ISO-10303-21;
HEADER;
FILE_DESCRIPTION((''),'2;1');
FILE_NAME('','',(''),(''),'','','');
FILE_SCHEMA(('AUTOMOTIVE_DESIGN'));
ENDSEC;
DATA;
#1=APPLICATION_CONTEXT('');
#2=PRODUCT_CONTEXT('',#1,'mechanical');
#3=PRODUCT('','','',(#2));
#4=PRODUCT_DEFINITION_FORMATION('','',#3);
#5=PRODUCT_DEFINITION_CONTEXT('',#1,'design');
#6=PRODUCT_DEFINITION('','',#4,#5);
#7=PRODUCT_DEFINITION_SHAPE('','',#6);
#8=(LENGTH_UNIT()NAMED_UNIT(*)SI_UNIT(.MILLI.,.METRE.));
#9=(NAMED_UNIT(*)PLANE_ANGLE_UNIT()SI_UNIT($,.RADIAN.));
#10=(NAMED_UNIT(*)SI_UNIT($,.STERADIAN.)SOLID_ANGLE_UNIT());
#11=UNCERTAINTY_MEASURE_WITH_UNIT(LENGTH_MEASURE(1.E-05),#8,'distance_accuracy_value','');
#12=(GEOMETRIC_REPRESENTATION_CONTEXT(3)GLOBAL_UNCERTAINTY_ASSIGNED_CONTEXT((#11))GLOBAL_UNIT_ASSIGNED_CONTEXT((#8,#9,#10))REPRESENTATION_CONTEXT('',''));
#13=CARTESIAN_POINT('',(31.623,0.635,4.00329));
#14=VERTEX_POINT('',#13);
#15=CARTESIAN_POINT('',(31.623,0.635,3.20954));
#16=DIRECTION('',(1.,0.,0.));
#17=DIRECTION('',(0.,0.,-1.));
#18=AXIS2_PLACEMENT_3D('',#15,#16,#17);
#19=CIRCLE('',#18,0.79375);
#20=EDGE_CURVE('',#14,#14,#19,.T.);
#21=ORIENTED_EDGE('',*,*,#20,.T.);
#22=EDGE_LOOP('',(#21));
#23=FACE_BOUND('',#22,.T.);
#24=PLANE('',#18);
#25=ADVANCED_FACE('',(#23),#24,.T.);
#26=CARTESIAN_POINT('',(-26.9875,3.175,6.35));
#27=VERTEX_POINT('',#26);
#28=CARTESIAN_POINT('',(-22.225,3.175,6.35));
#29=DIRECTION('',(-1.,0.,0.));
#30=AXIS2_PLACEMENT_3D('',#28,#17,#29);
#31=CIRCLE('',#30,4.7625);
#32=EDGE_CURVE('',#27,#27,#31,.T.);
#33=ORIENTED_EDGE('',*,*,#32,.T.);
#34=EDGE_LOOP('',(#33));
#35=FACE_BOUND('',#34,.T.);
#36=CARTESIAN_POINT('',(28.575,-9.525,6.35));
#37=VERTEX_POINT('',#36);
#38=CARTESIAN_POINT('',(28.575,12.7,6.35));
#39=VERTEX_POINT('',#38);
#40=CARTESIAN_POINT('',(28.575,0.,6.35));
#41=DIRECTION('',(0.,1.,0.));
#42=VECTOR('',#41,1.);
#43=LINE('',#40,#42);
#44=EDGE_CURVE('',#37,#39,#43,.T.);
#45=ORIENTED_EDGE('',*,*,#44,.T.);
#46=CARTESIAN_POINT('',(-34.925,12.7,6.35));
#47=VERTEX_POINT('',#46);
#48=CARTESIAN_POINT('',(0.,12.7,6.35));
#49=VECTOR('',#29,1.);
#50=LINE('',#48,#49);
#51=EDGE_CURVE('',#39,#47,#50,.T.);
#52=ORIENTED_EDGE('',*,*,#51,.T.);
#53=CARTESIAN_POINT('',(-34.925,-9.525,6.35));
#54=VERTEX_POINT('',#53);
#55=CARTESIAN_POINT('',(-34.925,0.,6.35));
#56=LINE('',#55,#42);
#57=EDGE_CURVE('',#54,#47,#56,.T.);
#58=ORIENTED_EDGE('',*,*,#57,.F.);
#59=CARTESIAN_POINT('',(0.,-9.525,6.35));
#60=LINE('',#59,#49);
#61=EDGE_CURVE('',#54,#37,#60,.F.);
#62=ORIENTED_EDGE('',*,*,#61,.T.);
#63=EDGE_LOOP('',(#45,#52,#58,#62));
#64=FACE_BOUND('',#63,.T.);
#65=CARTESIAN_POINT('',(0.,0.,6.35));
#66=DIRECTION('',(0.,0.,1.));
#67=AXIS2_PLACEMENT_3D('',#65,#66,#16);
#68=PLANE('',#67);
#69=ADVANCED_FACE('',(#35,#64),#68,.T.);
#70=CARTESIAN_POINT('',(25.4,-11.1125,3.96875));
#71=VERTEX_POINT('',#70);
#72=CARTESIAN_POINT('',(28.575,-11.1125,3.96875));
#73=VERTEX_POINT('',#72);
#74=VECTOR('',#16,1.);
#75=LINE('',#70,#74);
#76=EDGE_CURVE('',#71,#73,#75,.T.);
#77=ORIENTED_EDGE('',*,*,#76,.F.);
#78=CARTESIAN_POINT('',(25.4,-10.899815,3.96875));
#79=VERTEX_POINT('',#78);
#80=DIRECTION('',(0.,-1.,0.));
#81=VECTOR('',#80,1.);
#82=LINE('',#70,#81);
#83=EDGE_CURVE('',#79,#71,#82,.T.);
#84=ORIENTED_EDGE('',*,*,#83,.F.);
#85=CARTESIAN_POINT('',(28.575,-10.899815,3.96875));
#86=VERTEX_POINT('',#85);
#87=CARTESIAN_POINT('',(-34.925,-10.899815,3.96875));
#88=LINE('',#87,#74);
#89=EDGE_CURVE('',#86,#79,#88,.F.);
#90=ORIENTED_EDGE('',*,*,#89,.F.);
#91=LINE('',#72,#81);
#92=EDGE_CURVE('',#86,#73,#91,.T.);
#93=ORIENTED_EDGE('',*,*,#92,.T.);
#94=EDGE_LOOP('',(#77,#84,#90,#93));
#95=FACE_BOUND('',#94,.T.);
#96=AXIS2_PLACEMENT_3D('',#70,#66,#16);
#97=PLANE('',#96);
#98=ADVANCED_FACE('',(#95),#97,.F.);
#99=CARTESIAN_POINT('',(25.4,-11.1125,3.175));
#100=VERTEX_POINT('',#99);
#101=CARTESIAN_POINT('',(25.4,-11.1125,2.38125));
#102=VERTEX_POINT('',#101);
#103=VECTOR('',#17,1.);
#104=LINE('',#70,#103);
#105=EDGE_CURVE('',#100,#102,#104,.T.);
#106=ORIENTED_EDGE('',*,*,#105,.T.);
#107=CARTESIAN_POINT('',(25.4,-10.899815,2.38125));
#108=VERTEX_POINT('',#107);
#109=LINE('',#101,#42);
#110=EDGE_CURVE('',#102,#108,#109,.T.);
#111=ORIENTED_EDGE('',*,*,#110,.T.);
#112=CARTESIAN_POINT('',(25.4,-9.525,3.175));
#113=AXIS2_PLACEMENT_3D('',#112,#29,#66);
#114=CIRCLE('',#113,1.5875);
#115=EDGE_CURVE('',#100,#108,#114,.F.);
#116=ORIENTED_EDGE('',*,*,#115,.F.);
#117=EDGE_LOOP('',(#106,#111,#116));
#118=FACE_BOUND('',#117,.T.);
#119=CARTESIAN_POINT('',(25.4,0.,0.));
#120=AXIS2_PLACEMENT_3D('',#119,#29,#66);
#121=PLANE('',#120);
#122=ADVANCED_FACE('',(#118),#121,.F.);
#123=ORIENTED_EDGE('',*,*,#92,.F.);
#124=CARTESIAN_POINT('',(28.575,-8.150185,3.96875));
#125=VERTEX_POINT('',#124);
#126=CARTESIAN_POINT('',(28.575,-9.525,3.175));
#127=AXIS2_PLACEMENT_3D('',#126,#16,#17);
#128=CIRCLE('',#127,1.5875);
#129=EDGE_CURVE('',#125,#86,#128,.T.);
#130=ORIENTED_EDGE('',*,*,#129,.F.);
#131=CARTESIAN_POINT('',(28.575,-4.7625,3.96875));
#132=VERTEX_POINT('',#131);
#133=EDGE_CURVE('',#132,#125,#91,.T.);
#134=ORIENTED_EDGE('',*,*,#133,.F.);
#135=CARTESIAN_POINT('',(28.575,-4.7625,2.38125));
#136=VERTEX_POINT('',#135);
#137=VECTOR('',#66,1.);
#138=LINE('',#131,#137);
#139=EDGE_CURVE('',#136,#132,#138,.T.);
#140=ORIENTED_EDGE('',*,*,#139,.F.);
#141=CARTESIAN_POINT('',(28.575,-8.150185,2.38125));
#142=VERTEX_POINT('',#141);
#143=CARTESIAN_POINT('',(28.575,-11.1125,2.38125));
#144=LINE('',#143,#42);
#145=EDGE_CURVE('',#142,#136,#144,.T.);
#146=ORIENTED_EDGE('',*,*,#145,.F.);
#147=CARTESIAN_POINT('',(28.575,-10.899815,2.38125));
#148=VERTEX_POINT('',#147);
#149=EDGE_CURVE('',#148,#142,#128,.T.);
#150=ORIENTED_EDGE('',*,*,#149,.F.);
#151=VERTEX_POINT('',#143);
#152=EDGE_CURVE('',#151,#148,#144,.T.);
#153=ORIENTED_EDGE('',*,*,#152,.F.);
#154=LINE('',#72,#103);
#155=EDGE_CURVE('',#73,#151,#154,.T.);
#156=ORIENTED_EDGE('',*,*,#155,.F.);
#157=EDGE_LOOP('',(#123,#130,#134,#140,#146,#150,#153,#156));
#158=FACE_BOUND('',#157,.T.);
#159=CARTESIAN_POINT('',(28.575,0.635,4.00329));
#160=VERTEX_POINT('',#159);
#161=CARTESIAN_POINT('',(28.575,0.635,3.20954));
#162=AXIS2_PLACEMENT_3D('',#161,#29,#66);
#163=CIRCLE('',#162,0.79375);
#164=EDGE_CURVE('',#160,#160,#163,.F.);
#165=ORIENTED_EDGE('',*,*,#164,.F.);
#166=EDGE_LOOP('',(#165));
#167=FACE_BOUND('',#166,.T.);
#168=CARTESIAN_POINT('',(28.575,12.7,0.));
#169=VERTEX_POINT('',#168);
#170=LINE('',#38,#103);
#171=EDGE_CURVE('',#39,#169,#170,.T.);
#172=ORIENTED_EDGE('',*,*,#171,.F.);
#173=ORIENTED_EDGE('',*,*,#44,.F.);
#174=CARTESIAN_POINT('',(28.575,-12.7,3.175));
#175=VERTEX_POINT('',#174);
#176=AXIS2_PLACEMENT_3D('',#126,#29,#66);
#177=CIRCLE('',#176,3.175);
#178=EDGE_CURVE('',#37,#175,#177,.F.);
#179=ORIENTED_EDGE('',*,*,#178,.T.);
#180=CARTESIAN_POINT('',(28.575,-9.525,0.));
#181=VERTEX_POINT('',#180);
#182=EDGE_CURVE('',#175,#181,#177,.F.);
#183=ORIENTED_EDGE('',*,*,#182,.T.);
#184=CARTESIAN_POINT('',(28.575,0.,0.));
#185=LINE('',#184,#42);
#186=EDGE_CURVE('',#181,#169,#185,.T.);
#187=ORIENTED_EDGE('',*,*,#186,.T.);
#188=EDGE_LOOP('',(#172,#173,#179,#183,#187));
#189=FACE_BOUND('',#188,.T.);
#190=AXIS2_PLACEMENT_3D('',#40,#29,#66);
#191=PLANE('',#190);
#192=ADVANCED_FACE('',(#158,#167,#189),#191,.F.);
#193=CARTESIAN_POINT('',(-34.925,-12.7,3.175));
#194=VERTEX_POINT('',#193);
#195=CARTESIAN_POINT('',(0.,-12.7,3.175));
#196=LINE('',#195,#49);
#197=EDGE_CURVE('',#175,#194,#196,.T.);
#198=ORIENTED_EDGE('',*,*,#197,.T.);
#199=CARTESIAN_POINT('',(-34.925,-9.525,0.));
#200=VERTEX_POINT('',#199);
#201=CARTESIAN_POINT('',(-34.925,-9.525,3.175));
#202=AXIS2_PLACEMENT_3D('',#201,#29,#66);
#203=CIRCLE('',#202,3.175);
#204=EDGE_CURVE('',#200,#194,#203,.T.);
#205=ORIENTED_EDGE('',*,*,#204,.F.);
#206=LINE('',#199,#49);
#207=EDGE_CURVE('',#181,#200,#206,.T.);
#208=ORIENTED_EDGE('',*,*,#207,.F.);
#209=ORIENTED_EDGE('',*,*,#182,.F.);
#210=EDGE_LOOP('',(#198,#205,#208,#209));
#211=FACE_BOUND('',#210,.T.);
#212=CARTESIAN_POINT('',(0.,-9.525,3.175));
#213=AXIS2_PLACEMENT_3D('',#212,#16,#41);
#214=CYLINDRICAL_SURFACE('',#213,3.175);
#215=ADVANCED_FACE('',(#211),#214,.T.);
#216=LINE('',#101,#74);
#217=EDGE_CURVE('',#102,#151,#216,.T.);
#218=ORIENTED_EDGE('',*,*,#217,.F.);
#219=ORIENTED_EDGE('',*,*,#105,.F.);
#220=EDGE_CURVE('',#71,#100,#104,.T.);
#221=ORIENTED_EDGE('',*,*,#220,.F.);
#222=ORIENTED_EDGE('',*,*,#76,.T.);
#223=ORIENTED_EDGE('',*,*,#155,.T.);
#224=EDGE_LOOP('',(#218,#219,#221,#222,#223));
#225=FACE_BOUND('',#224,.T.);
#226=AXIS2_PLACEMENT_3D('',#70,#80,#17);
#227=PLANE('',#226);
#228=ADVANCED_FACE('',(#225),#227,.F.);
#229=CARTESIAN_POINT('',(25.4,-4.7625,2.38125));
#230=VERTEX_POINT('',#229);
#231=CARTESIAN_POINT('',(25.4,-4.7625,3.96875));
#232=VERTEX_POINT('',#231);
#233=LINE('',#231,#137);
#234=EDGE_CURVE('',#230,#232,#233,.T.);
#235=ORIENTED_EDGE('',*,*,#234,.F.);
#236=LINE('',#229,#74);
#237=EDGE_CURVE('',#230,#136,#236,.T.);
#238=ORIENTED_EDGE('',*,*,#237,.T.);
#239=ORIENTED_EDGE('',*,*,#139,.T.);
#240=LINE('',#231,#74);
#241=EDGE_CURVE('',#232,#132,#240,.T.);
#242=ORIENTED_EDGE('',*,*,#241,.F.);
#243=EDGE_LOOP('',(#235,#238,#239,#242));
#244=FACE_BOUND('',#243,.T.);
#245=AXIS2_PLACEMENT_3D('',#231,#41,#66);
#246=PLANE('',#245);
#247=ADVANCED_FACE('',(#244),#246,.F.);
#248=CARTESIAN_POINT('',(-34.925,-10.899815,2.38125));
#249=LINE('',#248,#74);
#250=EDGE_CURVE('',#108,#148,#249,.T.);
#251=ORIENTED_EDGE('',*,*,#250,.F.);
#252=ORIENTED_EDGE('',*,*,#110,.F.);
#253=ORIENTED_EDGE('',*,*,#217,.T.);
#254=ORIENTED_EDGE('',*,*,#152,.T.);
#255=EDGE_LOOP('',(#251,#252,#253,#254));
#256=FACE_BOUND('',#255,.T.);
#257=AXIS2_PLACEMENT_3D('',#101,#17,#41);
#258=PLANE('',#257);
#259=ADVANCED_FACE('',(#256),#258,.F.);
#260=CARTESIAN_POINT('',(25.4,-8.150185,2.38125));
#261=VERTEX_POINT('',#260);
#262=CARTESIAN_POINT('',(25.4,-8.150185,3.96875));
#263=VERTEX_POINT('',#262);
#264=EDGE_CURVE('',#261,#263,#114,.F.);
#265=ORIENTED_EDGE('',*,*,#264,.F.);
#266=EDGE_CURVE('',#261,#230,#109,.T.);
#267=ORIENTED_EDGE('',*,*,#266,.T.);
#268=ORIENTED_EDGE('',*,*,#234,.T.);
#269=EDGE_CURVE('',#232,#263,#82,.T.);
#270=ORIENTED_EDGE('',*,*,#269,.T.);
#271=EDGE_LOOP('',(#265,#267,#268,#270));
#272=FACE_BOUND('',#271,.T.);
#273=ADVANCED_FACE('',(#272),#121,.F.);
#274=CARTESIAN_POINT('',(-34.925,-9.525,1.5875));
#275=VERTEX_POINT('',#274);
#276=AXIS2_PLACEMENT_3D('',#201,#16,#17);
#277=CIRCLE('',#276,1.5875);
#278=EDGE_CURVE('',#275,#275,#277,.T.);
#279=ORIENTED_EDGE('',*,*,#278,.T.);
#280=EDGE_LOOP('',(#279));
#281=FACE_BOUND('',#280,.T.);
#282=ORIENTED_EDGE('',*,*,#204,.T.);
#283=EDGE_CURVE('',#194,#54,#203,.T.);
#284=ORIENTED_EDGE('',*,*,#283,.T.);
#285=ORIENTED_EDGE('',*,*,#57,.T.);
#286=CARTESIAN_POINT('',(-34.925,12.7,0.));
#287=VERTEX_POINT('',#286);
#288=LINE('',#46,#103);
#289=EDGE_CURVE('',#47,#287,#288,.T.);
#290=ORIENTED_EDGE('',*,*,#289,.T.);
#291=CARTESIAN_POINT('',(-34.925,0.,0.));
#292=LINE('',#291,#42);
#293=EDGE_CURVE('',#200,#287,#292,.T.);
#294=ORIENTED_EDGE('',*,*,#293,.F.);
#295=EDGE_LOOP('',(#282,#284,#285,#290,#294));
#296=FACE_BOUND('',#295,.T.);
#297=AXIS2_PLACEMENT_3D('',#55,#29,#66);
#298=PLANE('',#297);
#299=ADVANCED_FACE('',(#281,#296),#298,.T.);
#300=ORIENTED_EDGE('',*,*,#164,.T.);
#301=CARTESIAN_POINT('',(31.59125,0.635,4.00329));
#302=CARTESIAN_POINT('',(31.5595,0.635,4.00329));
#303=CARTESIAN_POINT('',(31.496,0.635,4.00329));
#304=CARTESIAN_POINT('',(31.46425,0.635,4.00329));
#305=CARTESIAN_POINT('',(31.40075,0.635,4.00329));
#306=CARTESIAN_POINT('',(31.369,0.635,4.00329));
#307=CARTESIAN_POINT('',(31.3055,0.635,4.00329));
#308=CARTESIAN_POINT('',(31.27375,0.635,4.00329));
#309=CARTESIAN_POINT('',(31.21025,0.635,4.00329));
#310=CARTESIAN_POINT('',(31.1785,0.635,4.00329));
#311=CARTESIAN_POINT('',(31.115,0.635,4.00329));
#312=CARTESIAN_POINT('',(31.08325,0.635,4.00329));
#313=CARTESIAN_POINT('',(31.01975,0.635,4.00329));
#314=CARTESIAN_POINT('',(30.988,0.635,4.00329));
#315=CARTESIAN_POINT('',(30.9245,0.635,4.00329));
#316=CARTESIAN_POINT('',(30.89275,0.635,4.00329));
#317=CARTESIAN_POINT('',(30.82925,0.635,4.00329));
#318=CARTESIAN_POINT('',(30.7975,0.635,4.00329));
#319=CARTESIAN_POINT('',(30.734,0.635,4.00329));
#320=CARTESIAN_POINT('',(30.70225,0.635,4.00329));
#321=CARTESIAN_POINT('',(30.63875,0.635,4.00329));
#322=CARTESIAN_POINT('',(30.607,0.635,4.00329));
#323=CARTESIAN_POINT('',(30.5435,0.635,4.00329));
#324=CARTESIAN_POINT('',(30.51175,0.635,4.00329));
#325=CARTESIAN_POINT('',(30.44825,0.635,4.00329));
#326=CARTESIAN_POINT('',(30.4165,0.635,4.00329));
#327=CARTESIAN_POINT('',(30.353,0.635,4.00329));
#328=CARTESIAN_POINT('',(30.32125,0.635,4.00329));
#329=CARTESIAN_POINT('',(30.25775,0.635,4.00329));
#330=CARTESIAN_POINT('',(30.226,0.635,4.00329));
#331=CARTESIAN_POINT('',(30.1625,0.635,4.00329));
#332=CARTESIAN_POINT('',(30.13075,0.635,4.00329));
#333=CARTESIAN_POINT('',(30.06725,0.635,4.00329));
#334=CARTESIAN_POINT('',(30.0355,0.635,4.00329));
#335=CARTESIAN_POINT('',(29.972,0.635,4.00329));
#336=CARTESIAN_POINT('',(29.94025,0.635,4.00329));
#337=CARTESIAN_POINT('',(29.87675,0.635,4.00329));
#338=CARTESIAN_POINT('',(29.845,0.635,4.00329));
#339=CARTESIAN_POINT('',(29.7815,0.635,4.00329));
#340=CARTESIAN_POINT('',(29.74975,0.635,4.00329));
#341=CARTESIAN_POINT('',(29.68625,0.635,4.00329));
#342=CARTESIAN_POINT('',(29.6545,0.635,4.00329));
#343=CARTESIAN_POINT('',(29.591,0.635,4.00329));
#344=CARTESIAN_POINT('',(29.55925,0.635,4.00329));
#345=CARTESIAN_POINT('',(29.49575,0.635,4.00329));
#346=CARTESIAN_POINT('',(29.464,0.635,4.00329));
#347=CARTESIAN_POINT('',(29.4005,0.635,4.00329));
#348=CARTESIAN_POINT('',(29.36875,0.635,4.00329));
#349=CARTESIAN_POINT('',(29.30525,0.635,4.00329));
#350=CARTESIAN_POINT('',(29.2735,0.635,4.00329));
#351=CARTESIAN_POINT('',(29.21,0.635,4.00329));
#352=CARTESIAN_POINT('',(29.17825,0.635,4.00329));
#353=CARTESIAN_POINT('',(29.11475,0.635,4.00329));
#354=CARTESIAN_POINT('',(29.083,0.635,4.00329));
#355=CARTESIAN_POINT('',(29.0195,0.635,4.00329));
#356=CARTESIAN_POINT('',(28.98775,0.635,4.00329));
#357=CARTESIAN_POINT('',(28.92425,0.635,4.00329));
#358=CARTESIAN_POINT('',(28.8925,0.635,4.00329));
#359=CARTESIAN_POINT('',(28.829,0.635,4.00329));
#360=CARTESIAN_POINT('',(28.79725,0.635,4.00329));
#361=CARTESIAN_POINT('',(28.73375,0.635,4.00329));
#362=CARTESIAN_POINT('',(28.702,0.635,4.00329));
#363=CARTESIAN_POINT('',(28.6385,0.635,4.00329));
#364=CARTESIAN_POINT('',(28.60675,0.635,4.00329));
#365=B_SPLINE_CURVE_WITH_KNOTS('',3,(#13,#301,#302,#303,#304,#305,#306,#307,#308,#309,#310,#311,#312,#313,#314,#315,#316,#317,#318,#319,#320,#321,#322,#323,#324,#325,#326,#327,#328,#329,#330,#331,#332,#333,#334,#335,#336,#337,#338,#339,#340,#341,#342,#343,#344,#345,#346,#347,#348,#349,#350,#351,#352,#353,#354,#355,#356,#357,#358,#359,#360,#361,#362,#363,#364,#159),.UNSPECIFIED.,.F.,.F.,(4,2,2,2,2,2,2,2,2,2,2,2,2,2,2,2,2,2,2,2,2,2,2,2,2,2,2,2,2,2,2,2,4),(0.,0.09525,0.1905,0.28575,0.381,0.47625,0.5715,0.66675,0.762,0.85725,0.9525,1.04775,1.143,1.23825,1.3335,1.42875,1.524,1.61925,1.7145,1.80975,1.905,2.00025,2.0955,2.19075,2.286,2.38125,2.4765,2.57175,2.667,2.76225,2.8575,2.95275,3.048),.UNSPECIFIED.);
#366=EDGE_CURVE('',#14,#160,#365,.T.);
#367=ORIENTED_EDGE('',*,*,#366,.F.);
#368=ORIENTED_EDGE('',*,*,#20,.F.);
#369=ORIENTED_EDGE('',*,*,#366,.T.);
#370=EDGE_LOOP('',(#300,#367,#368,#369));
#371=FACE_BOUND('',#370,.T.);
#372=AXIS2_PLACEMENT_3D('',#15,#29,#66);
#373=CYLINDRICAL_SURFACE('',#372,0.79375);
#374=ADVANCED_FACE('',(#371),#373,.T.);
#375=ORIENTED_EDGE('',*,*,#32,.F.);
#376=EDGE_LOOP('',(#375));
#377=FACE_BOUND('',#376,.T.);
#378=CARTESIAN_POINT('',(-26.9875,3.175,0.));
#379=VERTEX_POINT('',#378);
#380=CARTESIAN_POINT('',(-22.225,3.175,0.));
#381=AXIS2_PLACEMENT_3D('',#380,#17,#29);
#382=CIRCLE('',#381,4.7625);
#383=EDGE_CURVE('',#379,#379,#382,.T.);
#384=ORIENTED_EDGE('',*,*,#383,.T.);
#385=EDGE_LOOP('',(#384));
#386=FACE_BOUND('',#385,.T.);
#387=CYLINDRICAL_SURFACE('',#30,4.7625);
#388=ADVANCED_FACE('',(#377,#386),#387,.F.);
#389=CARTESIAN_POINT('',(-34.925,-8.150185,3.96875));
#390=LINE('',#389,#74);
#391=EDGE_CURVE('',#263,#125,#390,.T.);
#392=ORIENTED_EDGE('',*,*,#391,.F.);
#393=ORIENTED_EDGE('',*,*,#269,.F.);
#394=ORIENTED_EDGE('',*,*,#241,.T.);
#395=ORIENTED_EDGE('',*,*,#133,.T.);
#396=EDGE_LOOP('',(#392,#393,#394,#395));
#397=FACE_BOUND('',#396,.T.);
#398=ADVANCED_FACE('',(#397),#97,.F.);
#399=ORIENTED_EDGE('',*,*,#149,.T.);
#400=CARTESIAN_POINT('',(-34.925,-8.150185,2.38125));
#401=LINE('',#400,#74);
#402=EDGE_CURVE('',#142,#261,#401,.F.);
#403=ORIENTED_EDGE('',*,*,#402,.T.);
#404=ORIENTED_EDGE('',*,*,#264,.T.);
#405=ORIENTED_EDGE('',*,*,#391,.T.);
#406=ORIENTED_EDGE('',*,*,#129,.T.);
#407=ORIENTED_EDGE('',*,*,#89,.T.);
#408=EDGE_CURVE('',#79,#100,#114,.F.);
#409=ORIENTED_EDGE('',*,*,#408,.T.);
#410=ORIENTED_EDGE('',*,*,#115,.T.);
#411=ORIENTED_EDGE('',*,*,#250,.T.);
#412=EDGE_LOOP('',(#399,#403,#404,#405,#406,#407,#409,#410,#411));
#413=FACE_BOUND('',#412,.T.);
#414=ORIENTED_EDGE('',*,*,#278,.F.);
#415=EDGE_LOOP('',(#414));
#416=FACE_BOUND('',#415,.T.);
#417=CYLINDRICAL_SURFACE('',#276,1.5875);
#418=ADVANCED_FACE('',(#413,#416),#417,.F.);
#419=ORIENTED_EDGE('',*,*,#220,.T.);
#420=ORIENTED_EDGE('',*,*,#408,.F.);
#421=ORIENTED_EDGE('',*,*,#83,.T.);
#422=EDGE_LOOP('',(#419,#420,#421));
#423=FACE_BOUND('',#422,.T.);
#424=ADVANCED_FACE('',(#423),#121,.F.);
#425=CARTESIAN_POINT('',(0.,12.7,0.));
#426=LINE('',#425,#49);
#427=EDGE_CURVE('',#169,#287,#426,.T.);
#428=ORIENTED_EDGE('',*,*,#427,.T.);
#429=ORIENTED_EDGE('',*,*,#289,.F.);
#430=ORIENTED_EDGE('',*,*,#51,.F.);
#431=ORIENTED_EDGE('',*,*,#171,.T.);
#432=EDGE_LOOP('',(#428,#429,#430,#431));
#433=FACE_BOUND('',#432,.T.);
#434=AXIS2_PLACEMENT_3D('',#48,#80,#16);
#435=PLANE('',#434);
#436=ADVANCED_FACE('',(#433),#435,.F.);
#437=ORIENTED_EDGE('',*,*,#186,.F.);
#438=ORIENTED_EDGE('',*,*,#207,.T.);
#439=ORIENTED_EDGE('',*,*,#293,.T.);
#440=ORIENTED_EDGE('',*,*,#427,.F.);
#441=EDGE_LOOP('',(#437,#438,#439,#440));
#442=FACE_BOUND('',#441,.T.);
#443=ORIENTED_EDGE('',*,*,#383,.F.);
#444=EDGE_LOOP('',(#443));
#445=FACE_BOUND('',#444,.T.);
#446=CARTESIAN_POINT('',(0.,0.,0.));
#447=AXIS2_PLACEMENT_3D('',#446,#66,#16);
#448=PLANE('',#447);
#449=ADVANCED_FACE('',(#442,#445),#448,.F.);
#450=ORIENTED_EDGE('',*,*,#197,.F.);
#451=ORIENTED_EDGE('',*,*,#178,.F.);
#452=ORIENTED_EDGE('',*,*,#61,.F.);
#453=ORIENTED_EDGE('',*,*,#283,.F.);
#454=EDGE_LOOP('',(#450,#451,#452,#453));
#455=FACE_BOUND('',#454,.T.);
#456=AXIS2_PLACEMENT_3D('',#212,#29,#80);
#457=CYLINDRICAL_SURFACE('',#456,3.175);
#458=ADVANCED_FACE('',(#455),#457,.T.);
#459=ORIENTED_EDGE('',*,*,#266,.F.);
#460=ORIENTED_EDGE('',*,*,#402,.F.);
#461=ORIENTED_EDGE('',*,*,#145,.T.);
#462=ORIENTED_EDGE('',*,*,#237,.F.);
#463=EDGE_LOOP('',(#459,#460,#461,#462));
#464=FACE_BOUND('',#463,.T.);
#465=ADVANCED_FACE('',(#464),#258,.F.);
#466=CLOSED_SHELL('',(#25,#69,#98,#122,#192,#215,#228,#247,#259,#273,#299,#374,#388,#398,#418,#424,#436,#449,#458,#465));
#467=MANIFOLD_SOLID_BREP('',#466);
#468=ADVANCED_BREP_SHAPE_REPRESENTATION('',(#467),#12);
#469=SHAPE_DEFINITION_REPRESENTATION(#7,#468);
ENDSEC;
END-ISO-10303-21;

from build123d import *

# Parameters (mm, degrees)
SKETCH1_W           = 63.5
SKETCH1_H           = 25.4
BOSS_EXTRUDE1_DEPTH = 6.35
SKETCH3_R           = 1.5875
CUT_EXTRUDE2_DEPTH  = 66.068137364
FILLET1_R           = 3.175
SKETCH4_R           = 4.7625
CUT_EXTRUDE3_DEPTH  = 38.701036126
SKETCH5_W           = 1.5875
SKETCH5_H           = 6.35
CUT_EXTRUDE4_DEPTH  = 3.175
SKETCH6_R           = 0.79375
BOSS_EXTRUDE2_DEPTH = 3.048


with BuildPart() as part:
    # Sketch1 → Boss-Extrude1 (new body)
    with BuildSketch(Plane.XY):
        with Locations((-3.175, 0)):
            Rectangle(SKETCH1_W, SKETCH1_H)
    extrude(amount=BOSS_EXTRUDE1_DEPTH)

    # Sketch3 → Cut-Extrude2 (cut, through all)
    with BuildSketch(Plane(origin=(28.575, 0, 6.35), x_dir=(0, 0, -1), z_dir=(1, 0, 0))):
        with Locations((3.175, -9.525)):
            Circle(SKETCH3_R)
    extrude(amount=-CUT_EXTRUDE2_DEPTH, mode=Mode.SUBTRACT)

    # Fillet1
    fillet1_edges = [part.edges().sort_by_distance(p)[0] for p in [
        (-3.175, -12.7, 0),
        (-3.175, -12.7, 6.35),
    ]]
    fillet(fillet1_edges, radius=FILLET1_R - 0.0001)  # a hair under: the kernel refuses the full size

    # Sketch4 → Cut-Extrude3 (cut, through all)
    with BuildSketch(Plane(origin=(0, 0, 0), x_dir=(-1, 0, 0), z_dir=(0, 0, -1))):
        with Locations((22.225, 3.175)):
            Circle(SKETCH4_R)
    extrude(amount=-CUT_EXTRUDE3_DEPTH, mode=Mode.SUBTRACT)

    # Sketch5 → Cut-Extrude4 (cut)
    with BuildSketch(Plane(origin=(28.575, 0, 0), x_dir=(0, 0, -1), z_dir=(1, 0, 0))):
        with Locations((-3.175, -7.9375)):
            Rectangle(SKETCH5_W, SKETCH5_H)
    extrude(amount=-CUT_EXTRUDE4_DEPTH, mode=Mode.SUBTRACT)

    # Sketch6 → Boss-Extrude2 (add)
    with BuildSketch(Plane(origin=(28.575, 0, 0), x_dir=(0, 0, -1), z_dir=(1, 0, 0))):
        with Locations(Location((-3.209540098, 0.635, 0), (0, 0, 180))):
            Circle(SKETCH6_R)
    extrude(amount=BOSS_EXTRUDE2_DEPTH)


solid = part.part
